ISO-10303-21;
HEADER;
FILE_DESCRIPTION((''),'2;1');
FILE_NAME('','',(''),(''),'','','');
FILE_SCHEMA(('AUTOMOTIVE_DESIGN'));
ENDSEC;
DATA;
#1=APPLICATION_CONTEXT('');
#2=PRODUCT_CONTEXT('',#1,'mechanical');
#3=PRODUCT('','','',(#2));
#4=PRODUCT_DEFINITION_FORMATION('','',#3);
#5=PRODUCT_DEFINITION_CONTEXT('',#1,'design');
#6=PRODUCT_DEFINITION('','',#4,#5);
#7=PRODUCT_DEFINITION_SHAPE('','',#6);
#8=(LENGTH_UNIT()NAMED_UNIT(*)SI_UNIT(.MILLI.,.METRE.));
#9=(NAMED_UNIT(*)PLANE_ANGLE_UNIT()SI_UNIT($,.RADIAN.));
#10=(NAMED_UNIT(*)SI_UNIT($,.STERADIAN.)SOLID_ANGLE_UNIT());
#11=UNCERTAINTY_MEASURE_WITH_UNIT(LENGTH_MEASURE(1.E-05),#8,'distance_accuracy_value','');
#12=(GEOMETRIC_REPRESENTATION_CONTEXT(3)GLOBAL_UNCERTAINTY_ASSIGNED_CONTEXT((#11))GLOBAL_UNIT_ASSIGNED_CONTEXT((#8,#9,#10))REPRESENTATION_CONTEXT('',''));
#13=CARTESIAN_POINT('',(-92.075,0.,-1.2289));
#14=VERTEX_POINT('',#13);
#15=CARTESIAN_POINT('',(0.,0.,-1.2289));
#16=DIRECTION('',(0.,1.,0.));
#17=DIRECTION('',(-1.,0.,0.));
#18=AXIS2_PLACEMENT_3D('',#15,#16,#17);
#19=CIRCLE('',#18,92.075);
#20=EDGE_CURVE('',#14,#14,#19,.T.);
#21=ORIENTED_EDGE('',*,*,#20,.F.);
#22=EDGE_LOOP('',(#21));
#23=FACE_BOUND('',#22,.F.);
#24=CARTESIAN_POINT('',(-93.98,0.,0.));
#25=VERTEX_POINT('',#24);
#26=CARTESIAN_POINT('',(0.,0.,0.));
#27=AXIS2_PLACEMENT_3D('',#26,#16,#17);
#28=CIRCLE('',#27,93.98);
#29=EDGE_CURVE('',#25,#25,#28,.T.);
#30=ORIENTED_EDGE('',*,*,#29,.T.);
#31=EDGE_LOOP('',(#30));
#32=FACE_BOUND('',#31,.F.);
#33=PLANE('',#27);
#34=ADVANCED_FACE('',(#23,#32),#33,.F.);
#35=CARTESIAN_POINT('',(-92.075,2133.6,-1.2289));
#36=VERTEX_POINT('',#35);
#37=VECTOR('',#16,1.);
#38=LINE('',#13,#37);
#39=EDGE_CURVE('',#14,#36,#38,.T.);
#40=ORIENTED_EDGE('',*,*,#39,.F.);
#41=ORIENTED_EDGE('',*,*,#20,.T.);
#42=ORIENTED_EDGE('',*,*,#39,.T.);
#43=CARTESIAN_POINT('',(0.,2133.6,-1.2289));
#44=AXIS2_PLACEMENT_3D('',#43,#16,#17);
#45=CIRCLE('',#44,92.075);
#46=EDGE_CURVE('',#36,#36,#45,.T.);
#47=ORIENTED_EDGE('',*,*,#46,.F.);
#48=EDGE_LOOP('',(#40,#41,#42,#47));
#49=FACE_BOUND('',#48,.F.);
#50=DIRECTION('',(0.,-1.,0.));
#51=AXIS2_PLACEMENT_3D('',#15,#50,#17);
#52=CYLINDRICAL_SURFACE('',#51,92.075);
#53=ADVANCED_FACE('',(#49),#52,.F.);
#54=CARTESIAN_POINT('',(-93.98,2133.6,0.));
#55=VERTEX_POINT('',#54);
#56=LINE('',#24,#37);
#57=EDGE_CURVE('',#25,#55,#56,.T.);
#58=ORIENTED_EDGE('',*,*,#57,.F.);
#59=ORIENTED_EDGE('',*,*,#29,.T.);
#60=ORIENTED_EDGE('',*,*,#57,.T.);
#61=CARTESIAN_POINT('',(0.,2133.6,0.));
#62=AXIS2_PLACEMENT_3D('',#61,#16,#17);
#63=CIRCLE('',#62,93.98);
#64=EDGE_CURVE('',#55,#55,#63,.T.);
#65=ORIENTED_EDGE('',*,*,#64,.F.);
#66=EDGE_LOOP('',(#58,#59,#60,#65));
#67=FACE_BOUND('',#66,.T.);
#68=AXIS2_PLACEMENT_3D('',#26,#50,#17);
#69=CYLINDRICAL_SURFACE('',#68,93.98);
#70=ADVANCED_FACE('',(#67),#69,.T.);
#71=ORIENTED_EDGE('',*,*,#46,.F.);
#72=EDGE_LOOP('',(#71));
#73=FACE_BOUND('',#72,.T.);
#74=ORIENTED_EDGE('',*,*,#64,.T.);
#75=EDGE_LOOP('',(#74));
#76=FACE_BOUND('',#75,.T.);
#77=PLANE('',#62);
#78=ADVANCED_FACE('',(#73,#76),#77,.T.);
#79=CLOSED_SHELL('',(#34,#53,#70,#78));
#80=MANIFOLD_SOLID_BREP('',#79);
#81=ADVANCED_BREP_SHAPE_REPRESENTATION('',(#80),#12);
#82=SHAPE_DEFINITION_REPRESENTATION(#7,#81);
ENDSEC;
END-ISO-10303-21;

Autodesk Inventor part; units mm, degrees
ref_plane "YZ Plane" through (0, 0, 0) normal (1, 0, 0) x (0, 1, 0)
ref_plane "XZ Plane" through (0, 0, 0) normal (0, 1, 0) x (-1, 0, 0)
ref_plane "XY Plane" through (0, 0, 0) normal (0, 0, 1) x (1, 0, 0)
sketch "Sketch1" plane through (0, 0, 0) normal (0, 1, 0) x (-1, 0, 0)
  circle A0 centre (0, 0) radius 93.98
  circle A1 centre (0, -1.2289) radius 92.075
  dimension "d1" = 184.15
  dimension "d4" = 187.96
extrude "Extrusion1" add sketch "Sketch1" along normal blind 2133.6
properties part number "8 in Phenolic Linter" material "Phenolic Resin"
